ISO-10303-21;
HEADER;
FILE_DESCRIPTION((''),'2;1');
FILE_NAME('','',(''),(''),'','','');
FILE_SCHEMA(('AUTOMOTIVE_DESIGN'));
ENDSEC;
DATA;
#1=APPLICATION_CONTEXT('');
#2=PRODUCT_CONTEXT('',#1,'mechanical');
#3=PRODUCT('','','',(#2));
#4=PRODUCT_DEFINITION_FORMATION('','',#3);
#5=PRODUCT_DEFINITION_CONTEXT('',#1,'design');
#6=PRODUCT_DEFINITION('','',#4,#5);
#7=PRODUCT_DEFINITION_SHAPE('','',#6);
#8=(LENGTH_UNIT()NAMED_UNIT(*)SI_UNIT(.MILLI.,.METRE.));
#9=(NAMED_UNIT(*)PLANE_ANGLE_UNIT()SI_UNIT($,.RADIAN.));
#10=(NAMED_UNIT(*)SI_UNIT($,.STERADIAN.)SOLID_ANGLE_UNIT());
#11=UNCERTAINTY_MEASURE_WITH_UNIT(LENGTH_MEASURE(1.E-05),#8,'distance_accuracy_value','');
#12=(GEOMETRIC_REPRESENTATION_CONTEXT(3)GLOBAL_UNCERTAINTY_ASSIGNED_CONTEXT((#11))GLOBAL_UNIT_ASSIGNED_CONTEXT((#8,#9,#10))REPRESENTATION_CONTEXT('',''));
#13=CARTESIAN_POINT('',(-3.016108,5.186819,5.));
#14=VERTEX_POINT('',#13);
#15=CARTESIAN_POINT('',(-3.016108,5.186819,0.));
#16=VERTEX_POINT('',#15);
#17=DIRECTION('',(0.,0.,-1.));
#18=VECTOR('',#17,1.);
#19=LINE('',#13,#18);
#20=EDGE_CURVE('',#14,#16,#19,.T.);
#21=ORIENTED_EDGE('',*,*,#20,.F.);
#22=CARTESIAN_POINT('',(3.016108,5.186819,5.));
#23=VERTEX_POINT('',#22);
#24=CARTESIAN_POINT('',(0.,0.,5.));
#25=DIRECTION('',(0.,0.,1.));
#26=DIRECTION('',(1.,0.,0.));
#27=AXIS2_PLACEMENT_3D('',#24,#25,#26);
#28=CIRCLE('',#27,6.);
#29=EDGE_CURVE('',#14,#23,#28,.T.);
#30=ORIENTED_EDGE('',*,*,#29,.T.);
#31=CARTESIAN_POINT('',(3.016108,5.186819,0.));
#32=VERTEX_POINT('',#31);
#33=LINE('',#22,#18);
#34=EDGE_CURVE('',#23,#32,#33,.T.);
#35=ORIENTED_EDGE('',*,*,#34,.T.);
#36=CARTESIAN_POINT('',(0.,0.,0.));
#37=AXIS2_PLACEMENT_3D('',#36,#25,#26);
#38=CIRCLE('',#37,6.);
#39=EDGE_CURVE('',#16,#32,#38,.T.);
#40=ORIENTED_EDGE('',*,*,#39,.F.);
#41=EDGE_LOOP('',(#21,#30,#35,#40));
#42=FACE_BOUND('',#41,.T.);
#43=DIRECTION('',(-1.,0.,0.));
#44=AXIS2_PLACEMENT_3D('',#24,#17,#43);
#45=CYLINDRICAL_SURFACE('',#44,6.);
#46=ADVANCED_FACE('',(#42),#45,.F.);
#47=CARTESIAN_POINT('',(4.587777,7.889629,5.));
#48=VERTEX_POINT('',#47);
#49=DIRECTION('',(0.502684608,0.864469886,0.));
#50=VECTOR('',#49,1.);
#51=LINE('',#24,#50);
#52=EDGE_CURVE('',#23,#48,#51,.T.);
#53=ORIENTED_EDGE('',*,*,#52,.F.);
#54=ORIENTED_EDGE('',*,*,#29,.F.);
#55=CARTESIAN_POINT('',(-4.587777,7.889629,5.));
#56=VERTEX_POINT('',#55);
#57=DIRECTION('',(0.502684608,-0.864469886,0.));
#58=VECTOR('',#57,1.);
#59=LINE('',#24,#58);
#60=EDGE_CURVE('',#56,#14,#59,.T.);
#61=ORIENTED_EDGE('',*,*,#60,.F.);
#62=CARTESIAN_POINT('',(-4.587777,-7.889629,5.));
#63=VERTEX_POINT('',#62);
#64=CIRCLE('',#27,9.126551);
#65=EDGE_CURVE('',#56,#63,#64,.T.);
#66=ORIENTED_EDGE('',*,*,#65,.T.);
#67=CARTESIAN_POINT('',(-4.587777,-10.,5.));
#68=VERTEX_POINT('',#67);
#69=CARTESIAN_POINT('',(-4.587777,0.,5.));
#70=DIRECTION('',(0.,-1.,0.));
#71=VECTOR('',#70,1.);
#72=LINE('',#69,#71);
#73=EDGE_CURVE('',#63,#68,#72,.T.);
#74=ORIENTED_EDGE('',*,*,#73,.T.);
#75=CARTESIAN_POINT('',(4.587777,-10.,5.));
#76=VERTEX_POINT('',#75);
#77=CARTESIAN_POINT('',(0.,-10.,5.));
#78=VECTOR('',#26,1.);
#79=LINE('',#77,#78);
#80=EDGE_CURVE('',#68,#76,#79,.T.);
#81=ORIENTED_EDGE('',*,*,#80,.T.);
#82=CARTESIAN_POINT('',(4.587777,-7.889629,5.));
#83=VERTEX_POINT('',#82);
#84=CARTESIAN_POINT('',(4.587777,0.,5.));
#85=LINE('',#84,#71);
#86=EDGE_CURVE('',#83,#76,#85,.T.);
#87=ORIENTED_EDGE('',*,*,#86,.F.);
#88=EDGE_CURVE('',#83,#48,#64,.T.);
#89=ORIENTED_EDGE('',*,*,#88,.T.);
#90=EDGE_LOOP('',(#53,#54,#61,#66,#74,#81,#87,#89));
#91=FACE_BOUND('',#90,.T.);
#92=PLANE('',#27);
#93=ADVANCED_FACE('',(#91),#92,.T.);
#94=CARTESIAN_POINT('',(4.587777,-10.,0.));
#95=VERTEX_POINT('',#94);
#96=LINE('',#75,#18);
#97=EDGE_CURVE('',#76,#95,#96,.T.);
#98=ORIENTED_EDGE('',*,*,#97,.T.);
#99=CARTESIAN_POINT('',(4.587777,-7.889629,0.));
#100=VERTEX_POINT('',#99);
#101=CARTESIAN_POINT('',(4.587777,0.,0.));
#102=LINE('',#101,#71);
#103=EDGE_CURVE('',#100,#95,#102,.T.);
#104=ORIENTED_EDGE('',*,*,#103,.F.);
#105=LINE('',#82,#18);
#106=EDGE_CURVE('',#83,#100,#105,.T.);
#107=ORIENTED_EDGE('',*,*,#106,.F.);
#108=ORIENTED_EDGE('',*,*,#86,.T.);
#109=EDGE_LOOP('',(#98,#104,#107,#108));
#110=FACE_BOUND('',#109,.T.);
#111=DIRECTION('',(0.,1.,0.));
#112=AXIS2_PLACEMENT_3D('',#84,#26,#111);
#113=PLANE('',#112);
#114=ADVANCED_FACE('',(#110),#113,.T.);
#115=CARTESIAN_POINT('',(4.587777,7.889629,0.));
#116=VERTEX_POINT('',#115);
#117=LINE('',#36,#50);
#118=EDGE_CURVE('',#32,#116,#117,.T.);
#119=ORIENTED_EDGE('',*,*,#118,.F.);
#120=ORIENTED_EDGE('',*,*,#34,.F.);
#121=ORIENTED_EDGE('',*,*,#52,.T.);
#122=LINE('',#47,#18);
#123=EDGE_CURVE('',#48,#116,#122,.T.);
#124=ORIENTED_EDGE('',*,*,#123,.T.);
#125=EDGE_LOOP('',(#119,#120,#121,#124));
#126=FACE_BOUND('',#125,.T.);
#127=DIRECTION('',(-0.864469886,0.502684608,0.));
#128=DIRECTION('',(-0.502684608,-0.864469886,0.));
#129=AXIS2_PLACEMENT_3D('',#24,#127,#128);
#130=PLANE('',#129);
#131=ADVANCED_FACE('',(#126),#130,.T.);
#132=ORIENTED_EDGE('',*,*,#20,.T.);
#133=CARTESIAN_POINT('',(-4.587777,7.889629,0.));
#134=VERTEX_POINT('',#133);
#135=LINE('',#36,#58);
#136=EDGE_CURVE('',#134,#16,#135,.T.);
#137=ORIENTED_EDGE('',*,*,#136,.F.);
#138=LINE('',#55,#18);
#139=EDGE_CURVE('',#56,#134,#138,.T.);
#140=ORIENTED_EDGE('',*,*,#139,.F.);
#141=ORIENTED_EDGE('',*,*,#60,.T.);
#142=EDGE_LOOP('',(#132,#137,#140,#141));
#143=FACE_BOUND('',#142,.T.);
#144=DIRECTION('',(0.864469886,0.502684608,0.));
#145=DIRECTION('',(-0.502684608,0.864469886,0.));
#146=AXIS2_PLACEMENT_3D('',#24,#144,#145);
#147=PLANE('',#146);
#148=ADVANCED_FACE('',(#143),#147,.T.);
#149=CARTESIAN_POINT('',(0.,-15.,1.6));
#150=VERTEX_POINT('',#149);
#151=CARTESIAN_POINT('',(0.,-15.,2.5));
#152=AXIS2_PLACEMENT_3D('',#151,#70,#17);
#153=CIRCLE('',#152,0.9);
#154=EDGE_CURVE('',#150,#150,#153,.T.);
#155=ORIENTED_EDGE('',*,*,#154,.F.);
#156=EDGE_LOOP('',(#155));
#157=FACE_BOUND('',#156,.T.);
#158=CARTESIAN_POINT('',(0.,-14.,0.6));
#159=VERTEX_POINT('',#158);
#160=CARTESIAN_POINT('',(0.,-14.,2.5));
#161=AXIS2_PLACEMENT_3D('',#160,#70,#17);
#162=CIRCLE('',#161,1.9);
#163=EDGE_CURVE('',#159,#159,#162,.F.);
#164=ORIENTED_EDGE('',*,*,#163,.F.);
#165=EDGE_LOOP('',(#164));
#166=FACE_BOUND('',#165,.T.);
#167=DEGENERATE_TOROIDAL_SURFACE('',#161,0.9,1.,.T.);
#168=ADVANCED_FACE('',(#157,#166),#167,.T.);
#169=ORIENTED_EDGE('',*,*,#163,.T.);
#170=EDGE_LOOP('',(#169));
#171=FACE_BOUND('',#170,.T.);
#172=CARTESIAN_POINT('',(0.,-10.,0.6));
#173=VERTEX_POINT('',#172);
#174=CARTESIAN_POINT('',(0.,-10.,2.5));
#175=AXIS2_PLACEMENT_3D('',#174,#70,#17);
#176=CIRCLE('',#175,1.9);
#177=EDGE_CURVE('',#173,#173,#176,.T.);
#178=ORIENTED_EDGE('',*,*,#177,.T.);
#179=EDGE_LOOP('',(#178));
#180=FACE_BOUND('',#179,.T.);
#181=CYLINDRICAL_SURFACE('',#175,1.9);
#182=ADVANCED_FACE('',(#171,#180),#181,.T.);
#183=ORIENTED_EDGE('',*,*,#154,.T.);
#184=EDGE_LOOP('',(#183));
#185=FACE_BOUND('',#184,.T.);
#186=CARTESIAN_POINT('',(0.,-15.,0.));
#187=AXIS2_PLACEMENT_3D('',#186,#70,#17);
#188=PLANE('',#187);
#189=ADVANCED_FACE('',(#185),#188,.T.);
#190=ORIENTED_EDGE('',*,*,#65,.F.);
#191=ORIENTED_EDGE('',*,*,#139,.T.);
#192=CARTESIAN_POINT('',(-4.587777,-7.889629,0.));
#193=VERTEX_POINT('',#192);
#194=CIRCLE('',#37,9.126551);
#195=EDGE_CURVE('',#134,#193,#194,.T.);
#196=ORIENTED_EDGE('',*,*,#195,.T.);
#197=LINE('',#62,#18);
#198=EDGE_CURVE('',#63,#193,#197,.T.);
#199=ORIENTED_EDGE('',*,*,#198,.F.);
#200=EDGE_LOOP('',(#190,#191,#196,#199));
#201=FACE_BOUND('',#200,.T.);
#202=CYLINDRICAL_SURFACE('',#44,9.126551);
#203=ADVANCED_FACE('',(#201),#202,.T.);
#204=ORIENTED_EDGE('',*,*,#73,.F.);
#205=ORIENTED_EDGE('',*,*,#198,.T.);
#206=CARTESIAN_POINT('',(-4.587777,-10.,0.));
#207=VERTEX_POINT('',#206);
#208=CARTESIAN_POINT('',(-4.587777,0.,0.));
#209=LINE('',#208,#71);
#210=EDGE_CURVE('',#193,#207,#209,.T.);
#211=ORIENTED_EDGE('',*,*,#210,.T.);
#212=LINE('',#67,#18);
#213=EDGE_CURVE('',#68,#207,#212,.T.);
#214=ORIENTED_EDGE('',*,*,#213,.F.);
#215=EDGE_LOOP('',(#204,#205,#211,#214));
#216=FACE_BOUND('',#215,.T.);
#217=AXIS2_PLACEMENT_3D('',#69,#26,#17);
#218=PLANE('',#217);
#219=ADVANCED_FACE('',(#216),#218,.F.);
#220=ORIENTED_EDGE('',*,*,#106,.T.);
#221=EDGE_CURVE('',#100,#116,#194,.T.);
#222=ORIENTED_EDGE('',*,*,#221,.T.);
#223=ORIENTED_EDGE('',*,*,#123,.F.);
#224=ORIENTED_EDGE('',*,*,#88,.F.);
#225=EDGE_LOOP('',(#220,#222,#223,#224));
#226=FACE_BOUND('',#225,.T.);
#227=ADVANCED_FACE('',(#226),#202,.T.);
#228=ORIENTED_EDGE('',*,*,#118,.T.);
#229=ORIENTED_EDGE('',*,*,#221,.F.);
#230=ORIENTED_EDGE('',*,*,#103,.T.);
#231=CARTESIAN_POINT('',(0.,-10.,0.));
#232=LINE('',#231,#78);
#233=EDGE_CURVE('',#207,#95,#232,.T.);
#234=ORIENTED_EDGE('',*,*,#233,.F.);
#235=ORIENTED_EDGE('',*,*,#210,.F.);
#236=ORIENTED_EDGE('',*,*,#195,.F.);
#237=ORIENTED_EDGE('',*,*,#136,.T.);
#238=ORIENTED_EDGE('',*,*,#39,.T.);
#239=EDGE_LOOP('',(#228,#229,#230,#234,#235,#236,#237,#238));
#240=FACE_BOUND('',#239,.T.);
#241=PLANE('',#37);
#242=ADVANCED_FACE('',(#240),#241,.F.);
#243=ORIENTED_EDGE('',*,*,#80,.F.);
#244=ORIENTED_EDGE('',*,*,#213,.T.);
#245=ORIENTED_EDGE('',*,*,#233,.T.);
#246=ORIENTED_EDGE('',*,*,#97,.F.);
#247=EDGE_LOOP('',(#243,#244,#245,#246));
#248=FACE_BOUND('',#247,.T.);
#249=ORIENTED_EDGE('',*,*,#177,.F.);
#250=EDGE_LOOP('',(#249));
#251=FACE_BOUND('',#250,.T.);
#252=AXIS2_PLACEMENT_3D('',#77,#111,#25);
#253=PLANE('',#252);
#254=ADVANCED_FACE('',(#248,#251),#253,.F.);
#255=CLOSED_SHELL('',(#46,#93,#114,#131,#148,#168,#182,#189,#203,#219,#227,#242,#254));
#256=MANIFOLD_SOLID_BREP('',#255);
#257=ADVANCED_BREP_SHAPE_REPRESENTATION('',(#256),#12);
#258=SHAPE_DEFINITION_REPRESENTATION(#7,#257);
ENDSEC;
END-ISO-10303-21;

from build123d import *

# Parameters (mm, degrees)
RESSALTO_EXTRUS_O1_DEPTH     = 5
RESSALTO_EXTRUS_O2_START     = -15
RESSALTO_EXTRUS_O2_OUTLINE_R = 1.9
RESSALTO_EXTRUS_O2_DEPTH     = 5
FILETE5_R                    = 1


# Read off the part's stored shape, not the designer's step: Ressalto-extrusão2
with BuildPart() as part:
    # Esboço1 → Ressalto-extrusão1 (new body)
    with BuildSketch(Plane.XY):
        with BuildLine():
            Line((4.587776734, -7.88962854), (4.587776734, -10))
            Line((4.587776734, -10), (-4.587776734, -10))
            Line((-4.587776734, -10), (-4.587776734, -7.88962854))
            ThreePointArc((-4.587776734, -7.88962854), (-9.126551039, 0), (-4.587776734, 7.88962854))
            Line((-4.587776734, 7.88962854), (-3.01610765, 5.186819319))
            ThreePointArc((-3.01610765, 5.186819319), (0, -6), (3.01610765, 5.186819319))
            Line((3.01610765, 5.186819319), (4.587776734, 7.88962854))
            ThreePointArc((4.587776734, 7.88962854), (9.126551039, 0), (4.587776734, -7.88962854))
        make_face()
    extrude(amount=RESSALTO_EXTRUS_O1_DEPTH)

    # Ressalto-extrusão2 outline → Ressalto-extrusão2 (add)
    with BuildSketch(Plane(origin=(0, 0, 0), x_dir=(1, 0, 0), z_dir=(0, 1, 0)).offset(RESSALTO_EXTRUS_O2_START)):
        with Locations((0, -2.5)):
            Circle(RESSALTO_EXTRUS_O2_OUTLINE_R)
    extrude(amount=RESSALTO_EXTRUS_O2_DEPTH)

    # Filete5
    filete5_edges = [part.edges().sort_by_distance(p)[0] for p in [
        (-1.9, -15, 2.5),
    ]]
    fillet(filete5_edges, radius=FILETE5_R)


solid = part.part
